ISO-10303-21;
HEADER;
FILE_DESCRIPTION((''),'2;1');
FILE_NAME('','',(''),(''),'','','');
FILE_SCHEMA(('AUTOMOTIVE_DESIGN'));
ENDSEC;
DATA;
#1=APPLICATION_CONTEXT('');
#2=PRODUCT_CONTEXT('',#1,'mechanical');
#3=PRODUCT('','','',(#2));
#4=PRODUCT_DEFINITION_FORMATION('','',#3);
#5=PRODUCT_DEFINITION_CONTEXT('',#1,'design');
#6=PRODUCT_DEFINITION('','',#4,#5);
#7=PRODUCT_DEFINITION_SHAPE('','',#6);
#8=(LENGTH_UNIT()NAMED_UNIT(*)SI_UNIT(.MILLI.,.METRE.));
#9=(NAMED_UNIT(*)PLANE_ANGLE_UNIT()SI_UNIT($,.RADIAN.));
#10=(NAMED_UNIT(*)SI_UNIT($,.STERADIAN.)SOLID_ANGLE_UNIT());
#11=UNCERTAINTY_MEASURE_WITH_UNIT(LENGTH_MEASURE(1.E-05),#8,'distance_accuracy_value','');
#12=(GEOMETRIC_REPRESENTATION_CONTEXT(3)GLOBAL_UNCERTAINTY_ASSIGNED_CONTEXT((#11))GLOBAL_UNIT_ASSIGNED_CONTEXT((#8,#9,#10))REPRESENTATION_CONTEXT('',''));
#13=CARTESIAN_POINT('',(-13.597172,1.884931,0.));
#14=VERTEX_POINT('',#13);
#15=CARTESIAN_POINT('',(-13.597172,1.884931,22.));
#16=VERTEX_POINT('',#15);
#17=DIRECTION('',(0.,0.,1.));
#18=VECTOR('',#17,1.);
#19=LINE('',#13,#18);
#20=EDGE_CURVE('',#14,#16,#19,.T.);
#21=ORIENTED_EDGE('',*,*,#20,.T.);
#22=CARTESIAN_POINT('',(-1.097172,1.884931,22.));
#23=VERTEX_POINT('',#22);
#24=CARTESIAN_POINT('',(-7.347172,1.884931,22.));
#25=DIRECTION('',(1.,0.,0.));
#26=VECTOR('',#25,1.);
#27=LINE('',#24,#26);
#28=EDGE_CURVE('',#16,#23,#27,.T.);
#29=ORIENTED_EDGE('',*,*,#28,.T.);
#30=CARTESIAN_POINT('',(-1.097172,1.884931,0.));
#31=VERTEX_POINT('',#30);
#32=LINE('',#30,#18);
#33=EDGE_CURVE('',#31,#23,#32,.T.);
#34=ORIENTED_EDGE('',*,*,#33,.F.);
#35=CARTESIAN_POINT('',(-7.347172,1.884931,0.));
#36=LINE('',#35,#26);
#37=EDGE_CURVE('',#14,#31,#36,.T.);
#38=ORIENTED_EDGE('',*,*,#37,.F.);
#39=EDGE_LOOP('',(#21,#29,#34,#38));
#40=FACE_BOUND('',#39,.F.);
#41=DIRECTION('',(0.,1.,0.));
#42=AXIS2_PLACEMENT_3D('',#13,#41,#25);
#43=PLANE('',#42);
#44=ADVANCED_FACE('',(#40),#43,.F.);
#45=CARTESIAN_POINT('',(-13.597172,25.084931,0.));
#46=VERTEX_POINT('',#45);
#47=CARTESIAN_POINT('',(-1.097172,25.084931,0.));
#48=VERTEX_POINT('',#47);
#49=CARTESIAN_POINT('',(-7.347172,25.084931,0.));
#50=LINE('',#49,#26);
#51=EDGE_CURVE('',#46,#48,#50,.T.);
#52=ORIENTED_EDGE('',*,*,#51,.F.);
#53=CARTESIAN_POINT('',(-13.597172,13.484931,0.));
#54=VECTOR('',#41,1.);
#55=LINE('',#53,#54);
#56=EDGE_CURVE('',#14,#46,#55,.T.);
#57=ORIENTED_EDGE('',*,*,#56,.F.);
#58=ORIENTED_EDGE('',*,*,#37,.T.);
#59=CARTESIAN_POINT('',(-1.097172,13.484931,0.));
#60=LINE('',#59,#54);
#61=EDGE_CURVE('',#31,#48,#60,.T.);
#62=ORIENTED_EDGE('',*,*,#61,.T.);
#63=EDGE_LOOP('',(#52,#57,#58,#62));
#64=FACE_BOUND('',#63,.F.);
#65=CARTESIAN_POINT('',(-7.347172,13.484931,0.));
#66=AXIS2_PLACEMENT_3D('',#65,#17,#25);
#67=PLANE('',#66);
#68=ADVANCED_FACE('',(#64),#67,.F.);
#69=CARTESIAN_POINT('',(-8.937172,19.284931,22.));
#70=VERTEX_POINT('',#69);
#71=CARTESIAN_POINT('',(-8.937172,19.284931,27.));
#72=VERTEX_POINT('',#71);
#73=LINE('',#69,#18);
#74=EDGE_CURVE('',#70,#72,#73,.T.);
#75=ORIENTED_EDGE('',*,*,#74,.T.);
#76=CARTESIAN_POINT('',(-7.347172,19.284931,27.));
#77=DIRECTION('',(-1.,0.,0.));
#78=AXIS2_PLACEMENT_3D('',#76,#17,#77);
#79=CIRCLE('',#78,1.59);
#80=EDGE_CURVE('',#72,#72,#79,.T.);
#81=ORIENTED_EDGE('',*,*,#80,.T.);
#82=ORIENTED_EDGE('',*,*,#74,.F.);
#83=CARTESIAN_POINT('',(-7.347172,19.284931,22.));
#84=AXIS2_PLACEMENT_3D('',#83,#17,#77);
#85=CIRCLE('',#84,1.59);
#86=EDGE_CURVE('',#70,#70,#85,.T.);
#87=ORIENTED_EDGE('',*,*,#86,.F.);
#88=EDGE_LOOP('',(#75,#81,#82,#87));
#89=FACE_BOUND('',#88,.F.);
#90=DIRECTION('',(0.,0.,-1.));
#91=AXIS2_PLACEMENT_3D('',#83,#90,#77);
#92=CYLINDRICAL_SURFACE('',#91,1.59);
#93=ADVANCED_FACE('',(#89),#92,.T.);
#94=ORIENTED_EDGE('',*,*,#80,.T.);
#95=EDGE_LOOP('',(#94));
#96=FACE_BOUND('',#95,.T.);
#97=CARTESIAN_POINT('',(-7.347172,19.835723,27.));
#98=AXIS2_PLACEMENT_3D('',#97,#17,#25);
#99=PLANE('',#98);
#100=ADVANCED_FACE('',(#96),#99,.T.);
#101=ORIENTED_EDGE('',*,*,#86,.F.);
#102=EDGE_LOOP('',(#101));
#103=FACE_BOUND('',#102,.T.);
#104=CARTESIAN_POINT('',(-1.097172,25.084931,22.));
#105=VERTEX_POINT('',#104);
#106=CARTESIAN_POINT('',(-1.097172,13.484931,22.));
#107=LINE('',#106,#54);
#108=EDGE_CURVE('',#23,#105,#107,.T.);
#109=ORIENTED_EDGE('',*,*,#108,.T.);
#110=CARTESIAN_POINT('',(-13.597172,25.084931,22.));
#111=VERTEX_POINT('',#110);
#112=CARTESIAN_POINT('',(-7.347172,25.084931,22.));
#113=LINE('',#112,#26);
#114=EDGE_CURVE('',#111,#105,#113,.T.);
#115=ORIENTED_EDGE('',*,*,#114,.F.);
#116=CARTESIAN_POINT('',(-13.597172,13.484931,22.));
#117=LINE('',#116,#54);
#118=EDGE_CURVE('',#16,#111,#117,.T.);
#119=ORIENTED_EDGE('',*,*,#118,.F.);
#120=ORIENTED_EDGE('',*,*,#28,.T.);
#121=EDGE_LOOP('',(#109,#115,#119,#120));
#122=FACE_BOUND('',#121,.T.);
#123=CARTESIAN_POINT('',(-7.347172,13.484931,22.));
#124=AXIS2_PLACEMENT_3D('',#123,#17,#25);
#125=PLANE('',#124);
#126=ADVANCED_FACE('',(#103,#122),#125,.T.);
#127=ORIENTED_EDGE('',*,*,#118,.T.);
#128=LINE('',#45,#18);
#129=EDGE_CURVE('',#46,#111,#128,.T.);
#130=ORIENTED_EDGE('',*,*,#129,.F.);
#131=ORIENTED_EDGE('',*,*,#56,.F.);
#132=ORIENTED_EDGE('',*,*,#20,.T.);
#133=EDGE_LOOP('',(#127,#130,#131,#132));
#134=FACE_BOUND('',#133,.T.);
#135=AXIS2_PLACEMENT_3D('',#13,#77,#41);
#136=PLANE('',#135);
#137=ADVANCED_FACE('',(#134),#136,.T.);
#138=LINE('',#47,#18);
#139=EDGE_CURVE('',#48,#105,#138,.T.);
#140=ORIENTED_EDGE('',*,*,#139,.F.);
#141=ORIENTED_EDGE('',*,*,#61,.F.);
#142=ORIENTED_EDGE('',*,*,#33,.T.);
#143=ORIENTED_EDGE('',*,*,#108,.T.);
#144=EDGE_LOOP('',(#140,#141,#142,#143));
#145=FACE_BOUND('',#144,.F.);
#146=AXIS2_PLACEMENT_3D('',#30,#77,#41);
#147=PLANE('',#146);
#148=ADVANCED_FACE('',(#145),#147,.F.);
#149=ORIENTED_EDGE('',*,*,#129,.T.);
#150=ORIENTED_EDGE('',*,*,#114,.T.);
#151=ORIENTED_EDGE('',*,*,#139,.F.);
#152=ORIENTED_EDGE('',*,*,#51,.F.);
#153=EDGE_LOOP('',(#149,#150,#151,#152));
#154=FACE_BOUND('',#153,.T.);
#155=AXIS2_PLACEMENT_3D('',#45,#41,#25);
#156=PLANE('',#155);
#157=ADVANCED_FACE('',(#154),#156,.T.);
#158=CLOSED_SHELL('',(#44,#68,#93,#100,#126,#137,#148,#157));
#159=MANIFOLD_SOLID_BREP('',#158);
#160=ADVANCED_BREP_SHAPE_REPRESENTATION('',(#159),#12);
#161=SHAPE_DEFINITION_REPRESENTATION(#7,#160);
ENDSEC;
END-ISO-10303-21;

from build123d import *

# Parameters (mm, degrees)
F0_W     = 12.5
F0_H     = 23.2
F1_DEPTH = 22
F3_DEPTH = 5


with BuildPart() as f1:
    # F0 (on Top) → F1 (new body)
    with BuildSketch(Plane.XY):
        with Locations((-7.3471718132, 13.4849312573)):
            Rectangle(F0_W, F0_H)
    extrude(amount=F1_DEPTH)

    # F2 (on face) → F3 (join)
    with BuildSketch(Plane.XY.offset(22)):
        with BuildLine():
            ThreePointArc((-5.7571718132, 19.2849312573), (-7.3471718132, 20.8749312573), (-8.9371718132, 19.2849312573))
            Line((-8.9371718132, 19.2849312573), (-5.7571718132, 19.2849312573))
        make_face()
        with BuildLine():
            Line((-5.7571718132, 19.2849312573), (-8.9371718132, 19.2849312573))
            ThreePointArc((-8.9371718132, 19.2849312573), (-7.3471718132, 17.6949312573), (-5.7571718132, 19.2849312573))
        make_face()
    extrude(amount=F3_DEPTH)


solid = f1.part
